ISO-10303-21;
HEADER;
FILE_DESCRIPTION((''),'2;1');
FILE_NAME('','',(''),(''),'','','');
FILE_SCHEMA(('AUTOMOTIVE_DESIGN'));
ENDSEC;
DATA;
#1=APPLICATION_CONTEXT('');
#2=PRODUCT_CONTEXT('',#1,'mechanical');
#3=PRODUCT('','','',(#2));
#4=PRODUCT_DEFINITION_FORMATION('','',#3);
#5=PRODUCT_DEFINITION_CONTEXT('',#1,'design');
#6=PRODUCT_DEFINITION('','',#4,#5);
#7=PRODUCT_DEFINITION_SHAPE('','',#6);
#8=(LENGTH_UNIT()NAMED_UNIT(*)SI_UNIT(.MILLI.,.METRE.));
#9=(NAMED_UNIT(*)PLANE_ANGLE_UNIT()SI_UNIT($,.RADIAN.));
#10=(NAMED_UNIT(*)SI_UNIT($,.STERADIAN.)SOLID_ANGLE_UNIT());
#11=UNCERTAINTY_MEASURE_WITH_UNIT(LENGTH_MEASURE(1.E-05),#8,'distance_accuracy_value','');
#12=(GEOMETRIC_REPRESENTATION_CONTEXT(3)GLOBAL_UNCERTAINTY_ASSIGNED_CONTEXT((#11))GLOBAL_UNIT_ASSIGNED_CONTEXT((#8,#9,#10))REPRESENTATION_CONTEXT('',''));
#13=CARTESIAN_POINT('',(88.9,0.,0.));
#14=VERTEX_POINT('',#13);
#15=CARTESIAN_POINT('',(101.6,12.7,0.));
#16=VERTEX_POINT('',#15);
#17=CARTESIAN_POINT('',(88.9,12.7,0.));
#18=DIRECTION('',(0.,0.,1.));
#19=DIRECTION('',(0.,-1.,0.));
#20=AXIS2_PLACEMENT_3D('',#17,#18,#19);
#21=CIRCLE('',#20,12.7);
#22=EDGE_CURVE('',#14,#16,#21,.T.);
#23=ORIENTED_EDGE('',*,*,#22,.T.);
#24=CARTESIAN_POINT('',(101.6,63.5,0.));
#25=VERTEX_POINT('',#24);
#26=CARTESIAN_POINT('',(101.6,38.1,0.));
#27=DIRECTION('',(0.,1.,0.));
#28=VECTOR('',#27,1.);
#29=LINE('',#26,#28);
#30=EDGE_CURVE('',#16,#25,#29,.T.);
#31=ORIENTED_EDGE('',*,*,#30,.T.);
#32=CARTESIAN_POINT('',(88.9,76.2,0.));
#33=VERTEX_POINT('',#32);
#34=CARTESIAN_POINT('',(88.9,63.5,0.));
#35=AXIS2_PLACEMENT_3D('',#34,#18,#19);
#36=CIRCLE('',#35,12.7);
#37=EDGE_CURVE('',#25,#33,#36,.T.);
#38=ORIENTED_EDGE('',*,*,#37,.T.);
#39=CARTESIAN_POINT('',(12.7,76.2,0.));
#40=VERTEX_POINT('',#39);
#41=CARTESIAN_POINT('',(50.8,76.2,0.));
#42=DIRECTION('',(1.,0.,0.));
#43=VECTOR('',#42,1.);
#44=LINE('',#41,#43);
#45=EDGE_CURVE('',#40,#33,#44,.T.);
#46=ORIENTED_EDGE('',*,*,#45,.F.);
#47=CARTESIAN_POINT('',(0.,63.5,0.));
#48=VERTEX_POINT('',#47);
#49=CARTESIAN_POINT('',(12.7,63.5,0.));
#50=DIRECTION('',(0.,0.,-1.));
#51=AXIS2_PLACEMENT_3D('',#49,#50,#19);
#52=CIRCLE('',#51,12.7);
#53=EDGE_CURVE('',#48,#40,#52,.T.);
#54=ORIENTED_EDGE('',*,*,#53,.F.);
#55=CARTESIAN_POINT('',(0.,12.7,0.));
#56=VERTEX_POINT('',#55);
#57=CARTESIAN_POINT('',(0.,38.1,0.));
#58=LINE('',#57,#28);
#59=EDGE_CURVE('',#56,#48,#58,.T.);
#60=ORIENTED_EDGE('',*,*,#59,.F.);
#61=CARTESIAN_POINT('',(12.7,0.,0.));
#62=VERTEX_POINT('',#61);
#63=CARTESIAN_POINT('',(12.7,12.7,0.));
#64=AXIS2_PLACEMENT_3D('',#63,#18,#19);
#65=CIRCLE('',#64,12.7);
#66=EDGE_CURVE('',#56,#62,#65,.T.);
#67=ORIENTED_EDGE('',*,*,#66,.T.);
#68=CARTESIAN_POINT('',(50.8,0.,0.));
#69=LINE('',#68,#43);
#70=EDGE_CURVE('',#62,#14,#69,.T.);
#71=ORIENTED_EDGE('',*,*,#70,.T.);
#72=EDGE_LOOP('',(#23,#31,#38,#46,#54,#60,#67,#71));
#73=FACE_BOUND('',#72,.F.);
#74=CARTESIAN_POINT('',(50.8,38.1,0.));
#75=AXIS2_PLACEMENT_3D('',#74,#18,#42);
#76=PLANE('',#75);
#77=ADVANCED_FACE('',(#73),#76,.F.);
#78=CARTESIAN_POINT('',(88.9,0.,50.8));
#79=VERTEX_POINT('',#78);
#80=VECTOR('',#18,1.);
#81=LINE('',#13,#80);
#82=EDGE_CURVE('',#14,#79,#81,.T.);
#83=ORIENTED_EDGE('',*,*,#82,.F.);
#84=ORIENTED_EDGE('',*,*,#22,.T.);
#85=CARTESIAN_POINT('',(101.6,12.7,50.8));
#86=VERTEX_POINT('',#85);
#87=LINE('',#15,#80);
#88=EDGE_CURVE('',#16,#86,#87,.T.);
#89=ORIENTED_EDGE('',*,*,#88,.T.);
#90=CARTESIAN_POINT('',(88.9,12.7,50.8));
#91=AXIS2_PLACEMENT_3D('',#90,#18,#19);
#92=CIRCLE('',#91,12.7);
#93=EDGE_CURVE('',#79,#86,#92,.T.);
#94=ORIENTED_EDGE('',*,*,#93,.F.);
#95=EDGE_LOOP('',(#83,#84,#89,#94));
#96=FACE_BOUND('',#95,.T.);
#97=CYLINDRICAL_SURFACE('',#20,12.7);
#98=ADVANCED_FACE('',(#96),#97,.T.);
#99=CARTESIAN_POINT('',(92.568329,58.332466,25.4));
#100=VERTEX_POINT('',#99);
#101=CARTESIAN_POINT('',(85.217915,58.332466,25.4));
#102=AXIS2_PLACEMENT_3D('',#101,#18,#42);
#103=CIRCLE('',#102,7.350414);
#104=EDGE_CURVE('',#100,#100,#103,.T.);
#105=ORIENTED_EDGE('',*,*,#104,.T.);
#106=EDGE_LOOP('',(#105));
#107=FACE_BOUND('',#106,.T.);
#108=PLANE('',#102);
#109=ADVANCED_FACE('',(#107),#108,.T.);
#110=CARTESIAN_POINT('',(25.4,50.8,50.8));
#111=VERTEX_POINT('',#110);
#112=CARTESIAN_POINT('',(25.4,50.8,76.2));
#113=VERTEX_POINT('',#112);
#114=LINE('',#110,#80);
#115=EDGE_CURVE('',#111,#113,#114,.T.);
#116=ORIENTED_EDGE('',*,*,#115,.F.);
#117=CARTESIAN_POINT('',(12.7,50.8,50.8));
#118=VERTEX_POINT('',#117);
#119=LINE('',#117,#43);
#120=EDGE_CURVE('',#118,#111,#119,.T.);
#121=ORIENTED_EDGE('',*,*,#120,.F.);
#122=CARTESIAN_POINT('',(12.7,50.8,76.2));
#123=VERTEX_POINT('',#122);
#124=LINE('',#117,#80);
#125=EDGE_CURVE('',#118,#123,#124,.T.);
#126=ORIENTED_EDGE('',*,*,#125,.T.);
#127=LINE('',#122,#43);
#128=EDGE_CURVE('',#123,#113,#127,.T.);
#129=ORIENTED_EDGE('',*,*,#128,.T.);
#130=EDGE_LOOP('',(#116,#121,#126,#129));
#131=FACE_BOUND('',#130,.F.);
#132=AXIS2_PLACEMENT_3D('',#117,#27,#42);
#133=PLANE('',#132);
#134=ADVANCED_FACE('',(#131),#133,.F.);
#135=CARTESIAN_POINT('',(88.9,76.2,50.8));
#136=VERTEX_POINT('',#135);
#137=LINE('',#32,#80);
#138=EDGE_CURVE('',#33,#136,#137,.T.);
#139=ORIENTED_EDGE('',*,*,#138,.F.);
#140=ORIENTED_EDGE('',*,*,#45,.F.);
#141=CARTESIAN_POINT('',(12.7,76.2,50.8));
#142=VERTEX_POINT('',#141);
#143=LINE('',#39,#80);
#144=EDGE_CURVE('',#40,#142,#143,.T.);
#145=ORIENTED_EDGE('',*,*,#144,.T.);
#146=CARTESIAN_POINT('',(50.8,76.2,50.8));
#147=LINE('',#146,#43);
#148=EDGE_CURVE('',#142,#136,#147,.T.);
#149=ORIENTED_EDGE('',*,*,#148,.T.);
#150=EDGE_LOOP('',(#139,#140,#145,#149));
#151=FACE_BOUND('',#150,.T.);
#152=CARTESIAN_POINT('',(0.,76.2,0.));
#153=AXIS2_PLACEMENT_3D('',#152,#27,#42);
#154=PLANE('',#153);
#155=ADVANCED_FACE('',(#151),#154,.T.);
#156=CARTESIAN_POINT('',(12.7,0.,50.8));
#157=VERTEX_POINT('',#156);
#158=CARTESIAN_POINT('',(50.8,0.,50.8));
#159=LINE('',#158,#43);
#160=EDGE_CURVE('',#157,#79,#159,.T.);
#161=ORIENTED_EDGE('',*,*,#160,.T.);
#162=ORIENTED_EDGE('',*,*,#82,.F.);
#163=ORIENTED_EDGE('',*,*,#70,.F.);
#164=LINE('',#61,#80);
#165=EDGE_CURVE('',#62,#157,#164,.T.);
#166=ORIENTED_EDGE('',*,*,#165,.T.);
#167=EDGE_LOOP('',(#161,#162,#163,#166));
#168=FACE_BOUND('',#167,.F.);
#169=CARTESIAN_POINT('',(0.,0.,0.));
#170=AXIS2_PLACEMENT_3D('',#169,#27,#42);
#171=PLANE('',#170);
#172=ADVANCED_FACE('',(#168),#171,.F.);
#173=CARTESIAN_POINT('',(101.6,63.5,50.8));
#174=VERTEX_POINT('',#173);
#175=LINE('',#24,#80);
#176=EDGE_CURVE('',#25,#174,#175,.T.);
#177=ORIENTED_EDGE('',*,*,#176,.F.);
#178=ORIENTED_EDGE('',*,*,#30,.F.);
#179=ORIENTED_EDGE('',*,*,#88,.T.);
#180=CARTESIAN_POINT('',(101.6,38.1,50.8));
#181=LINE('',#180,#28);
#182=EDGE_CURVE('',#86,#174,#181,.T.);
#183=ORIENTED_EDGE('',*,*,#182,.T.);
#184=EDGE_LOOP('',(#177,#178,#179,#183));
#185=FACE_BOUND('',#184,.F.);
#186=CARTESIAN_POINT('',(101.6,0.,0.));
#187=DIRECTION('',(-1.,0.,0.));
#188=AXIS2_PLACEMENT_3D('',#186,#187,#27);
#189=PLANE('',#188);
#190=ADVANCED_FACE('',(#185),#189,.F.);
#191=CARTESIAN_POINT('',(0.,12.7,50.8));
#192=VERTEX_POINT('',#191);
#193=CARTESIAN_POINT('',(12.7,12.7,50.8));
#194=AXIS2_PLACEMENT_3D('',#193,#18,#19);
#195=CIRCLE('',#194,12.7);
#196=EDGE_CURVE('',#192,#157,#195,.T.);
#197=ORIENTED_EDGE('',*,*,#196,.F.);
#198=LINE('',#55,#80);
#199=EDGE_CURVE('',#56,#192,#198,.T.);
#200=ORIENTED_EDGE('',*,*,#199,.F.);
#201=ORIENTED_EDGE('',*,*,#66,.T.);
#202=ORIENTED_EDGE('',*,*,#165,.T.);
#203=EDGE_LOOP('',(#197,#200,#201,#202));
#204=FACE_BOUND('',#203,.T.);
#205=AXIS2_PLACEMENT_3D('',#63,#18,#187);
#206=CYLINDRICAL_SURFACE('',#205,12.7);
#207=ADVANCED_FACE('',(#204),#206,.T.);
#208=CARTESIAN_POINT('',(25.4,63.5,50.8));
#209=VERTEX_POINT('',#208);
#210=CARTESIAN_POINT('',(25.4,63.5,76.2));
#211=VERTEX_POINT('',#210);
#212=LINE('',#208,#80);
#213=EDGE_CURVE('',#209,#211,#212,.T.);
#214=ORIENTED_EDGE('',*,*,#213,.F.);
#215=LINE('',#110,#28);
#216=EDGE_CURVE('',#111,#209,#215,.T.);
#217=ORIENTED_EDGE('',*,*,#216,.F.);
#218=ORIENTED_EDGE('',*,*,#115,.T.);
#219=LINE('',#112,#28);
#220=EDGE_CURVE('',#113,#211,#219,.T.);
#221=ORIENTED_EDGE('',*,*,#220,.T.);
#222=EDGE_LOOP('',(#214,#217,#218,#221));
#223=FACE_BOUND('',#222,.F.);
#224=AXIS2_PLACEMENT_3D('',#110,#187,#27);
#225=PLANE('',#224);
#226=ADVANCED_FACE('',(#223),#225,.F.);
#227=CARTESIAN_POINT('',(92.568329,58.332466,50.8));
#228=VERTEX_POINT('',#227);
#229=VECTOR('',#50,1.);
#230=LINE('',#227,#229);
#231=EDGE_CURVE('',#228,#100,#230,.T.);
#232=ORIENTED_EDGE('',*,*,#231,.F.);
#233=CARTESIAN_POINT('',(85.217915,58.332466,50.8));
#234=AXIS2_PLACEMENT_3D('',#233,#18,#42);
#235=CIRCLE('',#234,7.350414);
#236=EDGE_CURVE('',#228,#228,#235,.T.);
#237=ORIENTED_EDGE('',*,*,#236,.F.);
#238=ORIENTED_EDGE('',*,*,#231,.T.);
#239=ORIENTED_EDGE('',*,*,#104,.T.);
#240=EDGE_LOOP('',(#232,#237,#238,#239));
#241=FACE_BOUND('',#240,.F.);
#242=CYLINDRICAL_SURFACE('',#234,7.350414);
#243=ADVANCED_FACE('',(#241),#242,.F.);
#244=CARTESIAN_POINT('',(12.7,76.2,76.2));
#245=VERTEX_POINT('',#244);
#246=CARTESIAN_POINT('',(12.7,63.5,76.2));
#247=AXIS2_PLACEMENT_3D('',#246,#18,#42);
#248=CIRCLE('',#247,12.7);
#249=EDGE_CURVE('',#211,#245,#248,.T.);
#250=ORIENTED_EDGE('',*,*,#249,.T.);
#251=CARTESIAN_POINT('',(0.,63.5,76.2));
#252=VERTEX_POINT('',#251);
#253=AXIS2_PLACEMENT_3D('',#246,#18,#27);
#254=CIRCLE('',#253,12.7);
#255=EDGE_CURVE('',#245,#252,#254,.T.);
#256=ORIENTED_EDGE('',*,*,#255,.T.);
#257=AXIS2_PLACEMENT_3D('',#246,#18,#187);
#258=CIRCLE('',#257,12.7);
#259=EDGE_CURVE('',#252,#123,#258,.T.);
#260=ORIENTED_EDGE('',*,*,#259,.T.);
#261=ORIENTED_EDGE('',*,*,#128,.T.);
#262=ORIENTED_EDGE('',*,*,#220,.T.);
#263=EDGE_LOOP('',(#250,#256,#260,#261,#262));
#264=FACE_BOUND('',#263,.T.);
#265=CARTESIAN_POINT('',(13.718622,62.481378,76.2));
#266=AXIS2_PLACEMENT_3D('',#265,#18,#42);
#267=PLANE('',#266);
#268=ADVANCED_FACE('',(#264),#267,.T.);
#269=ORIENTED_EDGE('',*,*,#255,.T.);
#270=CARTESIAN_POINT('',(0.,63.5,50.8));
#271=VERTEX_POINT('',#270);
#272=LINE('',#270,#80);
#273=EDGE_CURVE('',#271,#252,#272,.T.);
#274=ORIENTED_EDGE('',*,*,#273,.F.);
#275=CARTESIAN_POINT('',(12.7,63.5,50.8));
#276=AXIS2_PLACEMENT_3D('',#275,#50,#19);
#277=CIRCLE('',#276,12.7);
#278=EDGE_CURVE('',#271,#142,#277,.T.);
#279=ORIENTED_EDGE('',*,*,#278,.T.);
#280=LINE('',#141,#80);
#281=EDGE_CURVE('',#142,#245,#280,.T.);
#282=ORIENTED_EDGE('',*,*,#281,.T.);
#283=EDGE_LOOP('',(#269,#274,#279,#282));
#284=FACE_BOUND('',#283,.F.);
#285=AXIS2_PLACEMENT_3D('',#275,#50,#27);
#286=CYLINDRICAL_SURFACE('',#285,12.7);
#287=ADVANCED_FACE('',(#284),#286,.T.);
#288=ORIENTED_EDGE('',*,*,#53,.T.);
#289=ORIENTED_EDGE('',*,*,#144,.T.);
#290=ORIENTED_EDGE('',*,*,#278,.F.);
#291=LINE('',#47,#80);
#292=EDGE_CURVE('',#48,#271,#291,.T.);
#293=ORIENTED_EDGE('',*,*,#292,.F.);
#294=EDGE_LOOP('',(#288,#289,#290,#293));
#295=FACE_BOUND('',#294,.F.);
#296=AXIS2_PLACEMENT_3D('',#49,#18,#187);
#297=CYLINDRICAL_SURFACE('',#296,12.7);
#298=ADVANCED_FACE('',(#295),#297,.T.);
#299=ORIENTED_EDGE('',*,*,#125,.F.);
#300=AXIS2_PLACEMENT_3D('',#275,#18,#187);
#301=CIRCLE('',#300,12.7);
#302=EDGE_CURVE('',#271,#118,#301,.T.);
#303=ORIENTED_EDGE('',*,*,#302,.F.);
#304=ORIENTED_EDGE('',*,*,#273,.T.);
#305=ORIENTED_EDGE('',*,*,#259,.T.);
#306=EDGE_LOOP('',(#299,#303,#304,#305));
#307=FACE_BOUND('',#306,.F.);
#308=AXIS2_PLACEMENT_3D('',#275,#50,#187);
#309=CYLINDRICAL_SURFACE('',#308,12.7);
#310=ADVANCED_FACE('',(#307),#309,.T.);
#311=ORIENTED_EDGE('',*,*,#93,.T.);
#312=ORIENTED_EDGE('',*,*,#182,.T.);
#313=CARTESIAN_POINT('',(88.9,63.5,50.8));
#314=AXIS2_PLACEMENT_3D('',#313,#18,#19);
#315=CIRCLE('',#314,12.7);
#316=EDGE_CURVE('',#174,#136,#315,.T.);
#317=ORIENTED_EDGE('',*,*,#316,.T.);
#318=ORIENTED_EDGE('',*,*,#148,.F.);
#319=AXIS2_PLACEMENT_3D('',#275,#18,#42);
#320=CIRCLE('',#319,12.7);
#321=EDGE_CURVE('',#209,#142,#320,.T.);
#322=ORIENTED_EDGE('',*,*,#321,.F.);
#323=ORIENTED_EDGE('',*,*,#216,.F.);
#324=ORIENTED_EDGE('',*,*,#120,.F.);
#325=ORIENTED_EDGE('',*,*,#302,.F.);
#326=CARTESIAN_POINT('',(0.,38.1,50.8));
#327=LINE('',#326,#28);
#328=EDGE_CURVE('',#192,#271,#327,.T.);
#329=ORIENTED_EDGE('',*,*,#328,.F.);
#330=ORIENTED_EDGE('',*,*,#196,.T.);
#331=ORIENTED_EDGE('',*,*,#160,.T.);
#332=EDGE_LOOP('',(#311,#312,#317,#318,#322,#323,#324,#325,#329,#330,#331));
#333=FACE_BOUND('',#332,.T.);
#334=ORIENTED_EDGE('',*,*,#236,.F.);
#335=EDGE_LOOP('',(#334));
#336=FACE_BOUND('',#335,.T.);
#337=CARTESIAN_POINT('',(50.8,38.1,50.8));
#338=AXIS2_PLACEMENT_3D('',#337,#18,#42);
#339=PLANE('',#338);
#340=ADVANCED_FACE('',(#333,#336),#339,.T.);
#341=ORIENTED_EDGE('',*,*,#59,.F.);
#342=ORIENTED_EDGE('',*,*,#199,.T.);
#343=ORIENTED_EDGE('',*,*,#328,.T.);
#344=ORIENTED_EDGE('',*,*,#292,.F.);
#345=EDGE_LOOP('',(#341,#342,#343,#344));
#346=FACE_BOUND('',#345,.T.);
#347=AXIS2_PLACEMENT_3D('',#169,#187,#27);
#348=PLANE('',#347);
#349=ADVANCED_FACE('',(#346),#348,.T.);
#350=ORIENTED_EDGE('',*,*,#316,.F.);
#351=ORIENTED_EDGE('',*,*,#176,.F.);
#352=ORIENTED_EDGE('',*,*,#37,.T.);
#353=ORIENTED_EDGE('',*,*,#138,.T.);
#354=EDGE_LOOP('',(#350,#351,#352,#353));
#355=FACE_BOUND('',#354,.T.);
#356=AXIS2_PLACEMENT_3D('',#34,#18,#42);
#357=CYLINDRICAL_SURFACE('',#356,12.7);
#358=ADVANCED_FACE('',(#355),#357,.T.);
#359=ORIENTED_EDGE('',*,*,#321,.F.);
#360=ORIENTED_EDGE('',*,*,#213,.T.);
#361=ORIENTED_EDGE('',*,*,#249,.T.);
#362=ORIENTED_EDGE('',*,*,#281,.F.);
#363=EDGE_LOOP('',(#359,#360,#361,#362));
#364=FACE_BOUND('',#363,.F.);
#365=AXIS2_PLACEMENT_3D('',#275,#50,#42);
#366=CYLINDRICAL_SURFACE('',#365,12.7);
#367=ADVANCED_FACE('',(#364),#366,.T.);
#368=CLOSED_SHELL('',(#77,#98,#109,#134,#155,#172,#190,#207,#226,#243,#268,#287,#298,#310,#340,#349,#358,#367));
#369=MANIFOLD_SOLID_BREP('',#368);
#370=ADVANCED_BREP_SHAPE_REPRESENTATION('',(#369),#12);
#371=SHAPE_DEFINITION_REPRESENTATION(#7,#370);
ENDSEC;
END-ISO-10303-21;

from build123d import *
from build123d import SkipClean  # not in build123d's __all__

# Parameters (mm, degrees)
F0_W      = 101.6
F0_H      = 76.2
F1_DEPTH  = 50.8
F2_R      = 12.7
F4_DEPTH  = 25.4
F9_R      = 7.3504137181
F10_DEPTH = 25.4


# Not quite as in the source:
# - after a boolean that leaves OpenCascade's solid faulty, fix() repairs it
# - the program builds the solid bodies; features that only make, move or delete a surface that nothing else refers to are left out


with BuildPart() as f1:
    # F0 (on Top) → F1 (new body)
    with BuildSketch(Plane.XY):
        with Locations((50.8, 38.1)):
            Rectangle(F0_W, F0_H)
    extrude(amount=F1_DEPTH)

    # F2
    f2_edges = [f1.edges().sort_by_distance(p)[0] for p in [
        (0, 0, 25.4),
        (101.6, 0, 25.4),
        (101.6, 76.2, 25.4),
        (0, 76.2, 25.4),
    ]]
    fillet(f2_edges, radius=F2_R)

    # F3 (on face) → F4 (join)
    with BuildSketch(Plane.XY.offset(50.8)):
        with BuildLine():
            ThreePointArc((0, 63.5), (3.7197438789, 54.5197438789), (12.7, 50.8))
            Line((12.7, 50.8), (25.4, 50.8))
            Line((25.4, 50.8), (25.4, 63.5))
            ThreePointArc((25.4, 63.5), (21.6802561211, 72.4802561211), (12.7, 76.2))
            ThreePointArc((12.7, 76.2), (3.7197438789, 72.4802561211), (0, 63.5))
        make_face()
    with SkipClean():  # cleaning this boolean's faces spoils the solid; the shape is the same uncleaned
        extrude(amount=F4_DEPTH)

    # F9 (on face) → F10 (cut)
    with BuildSketch(Plane.XY.offset(50.8)):
        with Locations((85.2179154754, 58.332465589)):
            Circle(F9_R)
    extrude(amount=-F10_DEPTH, mode=Mode.SUBTRACT)

    add(f1.part.fix(), mode=Mode.REPLACE)


solid = f1.part
